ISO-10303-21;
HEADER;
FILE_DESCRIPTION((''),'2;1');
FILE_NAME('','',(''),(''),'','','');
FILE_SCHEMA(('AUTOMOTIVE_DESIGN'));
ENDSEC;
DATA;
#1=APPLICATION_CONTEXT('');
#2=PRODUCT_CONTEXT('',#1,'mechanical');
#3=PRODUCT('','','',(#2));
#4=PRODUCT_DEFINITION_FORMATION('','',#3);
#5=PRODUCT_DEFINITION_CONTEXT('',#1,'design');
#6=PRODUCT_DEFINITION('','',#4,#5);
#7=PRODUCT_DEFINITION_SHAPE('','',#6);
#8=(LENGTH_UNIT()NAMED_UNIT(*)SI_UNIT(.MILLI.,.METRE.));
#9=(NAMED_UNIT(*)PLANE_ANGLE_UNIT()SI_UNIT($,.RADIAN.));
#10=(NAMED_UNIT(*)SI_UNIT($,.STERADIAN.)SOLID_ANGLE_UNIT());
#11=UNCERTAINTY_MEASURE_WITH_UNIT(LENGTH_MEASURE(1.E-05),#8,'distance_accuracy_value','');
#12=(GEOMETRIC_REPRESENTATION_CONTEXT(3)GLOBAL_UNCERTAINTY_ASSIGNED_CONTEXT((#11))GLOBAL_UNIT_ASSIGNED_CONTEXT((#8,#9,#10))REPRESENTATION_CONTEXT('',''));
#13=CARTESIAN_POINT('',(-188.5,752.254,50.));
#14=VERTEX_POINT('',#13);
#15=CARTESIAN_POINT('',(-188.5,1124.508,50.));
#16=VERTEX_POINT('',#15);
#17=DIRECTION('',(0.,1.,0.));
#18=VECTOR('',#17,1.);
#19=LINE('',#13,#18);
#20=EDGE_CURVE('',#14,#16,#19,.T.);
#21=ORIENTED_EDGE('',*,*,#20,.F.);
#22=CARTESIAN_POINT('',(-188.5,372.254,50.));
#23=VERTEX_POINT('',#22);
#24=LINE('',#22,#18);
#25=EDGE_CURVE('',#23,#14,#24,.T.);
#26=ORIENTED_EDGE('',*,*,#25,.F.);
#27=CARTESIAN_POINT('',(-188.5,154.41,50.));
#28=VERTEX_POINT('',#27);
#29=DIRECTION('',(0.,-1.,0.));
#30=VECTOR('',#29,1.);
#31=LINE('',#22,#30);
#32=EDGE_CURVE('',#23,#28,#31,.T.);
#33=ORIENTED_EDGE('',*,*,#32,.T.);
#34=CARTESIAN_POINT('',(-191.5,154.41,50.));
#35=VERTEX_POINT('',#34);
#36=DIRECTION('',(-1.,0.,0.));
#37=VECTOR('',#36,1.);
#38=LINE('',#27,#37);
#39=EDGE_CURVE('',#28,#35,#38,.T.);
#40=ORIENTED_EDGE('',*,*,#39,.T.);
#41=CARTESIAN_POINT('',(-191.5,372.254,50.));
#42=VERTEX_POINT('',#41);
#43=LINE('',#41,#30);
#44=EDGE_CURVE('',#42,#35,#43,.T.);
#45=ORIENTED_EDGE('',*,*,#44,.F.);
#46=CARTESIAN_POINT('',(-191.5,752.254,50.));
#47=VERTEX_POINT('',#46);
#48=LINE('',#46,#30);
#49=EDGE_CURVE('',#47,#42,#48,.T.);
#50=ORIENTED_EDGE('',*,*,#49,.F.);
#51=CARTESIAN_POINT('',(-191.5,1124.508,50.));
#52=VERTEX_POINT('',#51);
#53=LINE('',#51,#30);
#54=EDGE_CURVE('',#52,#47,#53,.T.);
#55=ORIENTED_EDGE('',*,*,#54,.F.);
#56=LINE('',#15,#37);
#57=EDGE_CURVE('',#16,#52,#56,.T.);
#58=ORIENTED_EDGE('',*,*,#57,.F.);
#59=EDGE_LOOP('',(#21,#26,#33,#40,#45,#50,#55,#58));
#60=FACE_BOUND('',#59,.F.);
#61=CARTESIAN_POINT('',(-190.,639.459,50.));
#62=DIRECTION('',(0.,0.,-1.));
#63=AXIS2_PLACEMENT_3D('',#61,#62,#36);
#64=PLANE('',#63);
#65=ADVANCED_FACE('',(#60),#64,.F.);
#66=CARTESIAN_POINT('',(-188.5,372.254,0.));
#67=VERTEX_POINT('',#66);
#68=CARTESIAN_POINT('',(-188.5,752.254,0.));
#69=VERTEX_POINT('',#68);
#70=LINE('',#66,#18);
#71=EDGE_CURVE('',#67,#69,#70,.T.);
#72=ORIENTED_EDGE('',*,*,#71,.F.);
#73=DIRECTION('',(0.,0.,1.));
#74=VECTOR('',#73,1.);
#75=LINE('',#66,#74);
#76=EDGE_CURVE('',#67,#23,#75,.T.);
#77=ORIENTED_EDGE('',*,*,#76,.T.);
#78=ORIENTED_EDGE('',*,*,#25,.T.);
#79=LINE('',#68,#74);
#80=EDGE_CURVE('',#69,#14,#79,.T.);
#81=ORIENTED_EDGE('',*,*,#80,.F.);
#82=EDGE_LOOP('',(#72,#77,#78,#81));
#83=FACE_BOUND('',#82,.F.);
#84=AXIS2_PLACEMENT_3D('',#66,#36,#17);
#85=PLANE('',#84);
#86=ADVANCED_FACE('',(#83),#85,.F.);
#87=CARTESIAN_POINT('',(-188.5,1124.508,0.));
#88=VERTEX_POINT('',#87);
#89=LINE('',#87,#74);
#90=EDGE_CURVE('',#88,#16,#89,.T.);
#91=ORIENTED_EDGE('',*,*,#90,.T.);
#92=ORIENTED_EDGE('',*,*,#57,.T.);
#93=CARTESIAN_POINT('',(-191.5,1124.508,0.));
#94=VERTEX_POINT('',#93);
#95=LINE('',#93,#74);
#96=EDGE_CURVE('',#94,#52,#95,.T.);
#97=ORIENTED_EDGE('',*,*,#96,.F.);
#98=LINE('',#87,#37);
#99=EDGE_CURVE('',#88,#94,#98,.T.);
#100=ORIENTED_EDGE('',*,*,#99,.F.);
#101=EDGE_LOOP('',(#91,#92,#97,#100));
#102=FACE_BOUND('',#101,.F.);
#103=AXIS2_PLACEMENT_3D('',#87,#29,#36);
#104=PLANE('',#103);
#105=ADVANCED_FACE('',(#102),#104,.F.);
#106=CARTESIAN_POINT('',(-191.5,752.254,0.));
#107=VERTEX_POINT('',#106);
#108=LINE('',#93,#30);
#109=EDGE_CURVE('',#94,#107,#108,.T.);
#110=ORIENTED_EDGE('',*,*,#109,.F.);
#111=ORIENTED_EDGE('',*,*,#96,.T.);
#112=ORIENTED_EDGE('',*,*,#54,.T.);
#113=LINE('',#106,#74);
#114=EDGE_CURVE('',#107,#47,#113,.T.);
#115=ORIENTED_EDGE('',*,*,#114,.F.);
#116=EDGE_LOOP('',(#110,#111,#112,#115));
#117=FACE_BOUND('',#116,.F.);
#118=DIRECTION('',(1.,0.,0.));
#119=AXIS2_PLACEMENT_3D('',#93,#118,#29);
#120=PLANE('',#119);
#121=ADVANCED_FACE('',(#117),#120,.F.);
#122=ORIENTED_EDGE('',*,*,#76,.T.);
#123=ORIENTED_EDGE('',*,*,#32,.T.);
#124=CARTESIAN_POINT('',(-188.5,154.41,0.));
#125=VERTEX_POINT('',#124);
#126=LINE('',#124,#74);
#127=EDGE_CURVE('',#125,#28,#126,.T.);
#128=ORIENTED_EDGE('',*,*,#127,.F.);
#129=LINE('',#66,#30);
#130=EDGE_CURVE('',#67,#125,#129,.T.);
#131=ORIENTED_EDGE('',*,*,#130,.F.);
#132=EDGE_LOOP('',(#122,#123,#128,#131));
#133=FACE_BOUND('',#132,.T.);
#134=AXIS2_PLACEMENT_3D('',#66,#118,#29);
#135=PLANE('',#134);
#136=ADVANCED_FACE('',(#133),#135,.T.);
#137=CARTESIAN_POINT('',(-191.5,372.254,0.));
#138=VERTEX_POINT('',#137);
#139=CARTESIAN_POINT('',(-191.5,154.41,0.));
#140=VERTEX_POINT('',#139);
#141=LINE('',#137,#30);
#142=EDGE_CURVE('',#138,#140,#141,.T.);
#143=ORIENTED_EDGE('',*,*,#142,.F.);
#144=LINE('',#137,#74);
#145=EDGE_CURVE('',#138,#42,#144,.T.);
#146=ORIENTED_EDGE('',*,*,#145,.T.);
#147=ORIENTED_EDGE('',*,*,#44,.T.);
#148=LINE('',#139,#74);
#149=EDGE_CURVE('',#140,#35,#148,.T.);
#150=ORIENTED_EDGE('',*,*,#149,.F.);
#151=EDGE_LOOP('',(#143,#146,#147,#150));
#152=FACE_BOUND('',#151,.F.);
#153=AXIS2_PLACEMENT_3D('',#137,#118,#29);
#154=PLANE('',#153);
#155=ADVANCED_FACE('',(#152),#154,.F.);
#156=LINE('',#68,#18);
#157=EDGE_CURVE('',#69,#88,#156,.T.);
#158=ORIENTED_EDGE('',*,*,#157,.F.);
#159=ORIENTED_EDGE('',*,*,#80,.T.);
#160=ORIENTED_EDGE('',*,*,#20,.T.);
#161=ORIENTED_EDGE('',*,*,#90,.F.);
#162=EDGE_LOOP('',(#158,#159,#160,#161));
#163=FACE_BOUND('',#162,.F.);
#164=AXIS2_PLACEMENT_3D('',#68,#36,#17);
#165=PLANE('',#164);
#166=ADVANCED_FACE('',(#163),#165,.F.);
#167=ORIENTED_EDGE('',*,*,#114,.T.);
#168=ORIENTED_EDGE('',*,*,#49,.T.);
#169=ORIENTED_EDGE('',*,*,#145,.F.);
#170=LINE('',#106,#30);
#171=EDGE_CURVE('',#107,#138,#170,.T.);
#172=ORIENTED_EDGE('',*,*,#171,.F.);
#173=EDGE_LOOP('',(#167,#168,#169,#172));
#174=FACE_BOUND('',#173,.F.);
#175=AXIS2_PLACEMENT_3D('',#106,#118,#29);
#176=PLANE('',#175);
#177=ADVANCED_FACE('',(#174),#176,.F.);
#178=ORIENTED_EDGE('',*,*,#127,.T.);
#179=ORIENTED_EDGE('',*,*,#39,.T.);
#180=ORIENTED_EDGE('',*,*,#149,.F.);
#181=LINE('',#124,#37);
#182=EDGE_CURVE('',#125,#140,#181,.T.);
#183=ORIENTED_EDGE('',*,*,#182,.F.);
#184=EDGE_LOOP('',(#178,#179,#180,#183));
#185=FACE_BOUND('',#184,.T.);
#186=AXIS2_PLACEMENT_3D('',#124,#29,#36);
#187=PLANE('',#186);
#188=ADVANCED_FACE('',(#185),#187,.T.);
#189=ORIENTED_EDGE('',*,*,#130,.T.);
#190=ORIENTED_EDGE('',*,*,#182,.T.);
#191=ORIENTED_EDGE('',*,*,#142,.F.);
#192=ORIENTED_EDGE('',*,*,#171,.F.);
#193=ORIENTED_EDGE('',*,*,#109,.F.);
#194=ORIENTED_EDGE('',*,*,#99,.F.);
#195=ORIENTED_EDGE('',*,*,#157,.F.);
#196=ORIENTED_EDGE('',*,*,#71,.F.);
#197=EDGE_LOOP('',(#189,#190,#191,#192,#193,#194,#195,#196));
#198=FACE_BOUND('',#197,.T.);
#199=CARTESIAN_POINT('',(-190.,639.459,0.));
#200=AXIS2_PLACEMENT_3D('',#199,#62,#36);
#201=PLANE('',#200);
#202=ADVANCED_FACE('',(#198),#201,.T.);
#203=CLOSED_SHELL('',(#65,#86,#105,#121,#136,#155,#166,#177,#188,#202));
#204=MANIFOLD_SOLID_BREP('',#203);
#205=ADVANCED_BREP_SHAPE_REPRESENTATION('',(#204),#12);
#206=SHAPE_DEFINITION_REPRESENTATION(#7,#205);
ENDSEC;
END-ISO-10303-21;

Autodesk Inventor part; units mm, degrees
ref_plane "YZ Plane" through (0, 0, 0) normal (1, 0, 0) x (0, 1, 0)
ref_plane "XZ Plane" through (0, 0, 0) normal (0, 1, 0) x (-1, 0, 0)
ref_plane "XY Plane" through (0, 0, 0) normal (0, 0, 1) x (1, 0, 0)
sketch "Sketch1" plane through (0, 0, 0) normal (0, 0, 1) x (1, 0, 0)
  line L0 (-768, 1124.508) -> (768, 1124.508) construction
  line L1 (-98, 0) -> (98, 0) construction
  line L2 (98, 0) -> (768, 1124.508) construction
  line L3 (-98, 0) -> (-768, 1124.508) construction
  line L4 (-190, 752.254) -> (190, 752.254) construction
  line L5 (190, 752.254) -> (190, 372.254) construction
  line L6 (190, 372.254) -> (-190, 372.254) construction
  line L7 (-190, 372.254) -> (-190, 752.254)
  line L8 (0, 1124.508) -> (0, 0) construction
  line L9 (-190, 752.254) -> (-190, 1124.508)
  line L10 (190, 752.254) -> (190, 1124.508) construction
  line L11 (-190, 372.254) -> (-190, 154.41)
  line L12 (190, 372.254) -> (190, 154.41) construction
  line L13 (-190, 752.254) -> (-546.2051, 752.254) construction
  line L14 (-190, 372.254) -> (-319.7949, 372.254) construction
  line L15 (190, 372.254) -> (319.7949, 372.254) construction
  line L16 (190, 752.254) -> (546.2051, 752.254) construction
  line L17 (-585.0411, 817.4352) -> (-581.9487, 812.2451) construction
  point P0 (0, 752.254)
  point P1 (-190, 562.254)
  point P2 (0, 562.254)
  dimension "d0" = 1536
  dimension "d1" = 196
  dimension "d2" = 1308.976
  dimension "d3" = 380
  dimension "d4" = 380
contour flange "Contour Flange1" sketch "Sketch1" thickness 3 bend radius 5 width 50 along (0, 0, 1) mid plane no both sides yes wall seen from (-190, 263.332, 0) lies toward (-1, 0, 0) curves L11 L7 L9
bend "Bend1"
corner "Corner1"
equation "\"d7\" = Thickness"
equation "\"d8\" = BendReliefWidth"
equation "\"d9\" = BendReliefDepth"
equation "\"d10\" = MinimumRemnant"
equation "\"d11\" = TransitionRadius"
equation "\"d13\" = BendRadius"
equation "\"d15\" = CornerReliefSize"
equation "\"d16\" = GapSize"
equation "\"d17\" = JacobiRadiusSize"
equation "\"BendReliefWidth\" = Thickness"
equation "\"BendReliefDepth\" = 0.5 * Thickness"
equation "\"CornerReliefSize\" = 4 * Thickness"
equation "\"MinimumRemnant\" = 2 * Thickness"
equation "\"TransitionRadius\" = BendRadius"
equation "\"JacobiRadiusSize\" = BendRadius"
equation "\"GapSize\" = Thickness"
equation "\"Thickness\" = 3"
equation "\"BendRadius\" = 5"
properties part number "MSC 0692 stringer cone" material "Stainless Steel"
